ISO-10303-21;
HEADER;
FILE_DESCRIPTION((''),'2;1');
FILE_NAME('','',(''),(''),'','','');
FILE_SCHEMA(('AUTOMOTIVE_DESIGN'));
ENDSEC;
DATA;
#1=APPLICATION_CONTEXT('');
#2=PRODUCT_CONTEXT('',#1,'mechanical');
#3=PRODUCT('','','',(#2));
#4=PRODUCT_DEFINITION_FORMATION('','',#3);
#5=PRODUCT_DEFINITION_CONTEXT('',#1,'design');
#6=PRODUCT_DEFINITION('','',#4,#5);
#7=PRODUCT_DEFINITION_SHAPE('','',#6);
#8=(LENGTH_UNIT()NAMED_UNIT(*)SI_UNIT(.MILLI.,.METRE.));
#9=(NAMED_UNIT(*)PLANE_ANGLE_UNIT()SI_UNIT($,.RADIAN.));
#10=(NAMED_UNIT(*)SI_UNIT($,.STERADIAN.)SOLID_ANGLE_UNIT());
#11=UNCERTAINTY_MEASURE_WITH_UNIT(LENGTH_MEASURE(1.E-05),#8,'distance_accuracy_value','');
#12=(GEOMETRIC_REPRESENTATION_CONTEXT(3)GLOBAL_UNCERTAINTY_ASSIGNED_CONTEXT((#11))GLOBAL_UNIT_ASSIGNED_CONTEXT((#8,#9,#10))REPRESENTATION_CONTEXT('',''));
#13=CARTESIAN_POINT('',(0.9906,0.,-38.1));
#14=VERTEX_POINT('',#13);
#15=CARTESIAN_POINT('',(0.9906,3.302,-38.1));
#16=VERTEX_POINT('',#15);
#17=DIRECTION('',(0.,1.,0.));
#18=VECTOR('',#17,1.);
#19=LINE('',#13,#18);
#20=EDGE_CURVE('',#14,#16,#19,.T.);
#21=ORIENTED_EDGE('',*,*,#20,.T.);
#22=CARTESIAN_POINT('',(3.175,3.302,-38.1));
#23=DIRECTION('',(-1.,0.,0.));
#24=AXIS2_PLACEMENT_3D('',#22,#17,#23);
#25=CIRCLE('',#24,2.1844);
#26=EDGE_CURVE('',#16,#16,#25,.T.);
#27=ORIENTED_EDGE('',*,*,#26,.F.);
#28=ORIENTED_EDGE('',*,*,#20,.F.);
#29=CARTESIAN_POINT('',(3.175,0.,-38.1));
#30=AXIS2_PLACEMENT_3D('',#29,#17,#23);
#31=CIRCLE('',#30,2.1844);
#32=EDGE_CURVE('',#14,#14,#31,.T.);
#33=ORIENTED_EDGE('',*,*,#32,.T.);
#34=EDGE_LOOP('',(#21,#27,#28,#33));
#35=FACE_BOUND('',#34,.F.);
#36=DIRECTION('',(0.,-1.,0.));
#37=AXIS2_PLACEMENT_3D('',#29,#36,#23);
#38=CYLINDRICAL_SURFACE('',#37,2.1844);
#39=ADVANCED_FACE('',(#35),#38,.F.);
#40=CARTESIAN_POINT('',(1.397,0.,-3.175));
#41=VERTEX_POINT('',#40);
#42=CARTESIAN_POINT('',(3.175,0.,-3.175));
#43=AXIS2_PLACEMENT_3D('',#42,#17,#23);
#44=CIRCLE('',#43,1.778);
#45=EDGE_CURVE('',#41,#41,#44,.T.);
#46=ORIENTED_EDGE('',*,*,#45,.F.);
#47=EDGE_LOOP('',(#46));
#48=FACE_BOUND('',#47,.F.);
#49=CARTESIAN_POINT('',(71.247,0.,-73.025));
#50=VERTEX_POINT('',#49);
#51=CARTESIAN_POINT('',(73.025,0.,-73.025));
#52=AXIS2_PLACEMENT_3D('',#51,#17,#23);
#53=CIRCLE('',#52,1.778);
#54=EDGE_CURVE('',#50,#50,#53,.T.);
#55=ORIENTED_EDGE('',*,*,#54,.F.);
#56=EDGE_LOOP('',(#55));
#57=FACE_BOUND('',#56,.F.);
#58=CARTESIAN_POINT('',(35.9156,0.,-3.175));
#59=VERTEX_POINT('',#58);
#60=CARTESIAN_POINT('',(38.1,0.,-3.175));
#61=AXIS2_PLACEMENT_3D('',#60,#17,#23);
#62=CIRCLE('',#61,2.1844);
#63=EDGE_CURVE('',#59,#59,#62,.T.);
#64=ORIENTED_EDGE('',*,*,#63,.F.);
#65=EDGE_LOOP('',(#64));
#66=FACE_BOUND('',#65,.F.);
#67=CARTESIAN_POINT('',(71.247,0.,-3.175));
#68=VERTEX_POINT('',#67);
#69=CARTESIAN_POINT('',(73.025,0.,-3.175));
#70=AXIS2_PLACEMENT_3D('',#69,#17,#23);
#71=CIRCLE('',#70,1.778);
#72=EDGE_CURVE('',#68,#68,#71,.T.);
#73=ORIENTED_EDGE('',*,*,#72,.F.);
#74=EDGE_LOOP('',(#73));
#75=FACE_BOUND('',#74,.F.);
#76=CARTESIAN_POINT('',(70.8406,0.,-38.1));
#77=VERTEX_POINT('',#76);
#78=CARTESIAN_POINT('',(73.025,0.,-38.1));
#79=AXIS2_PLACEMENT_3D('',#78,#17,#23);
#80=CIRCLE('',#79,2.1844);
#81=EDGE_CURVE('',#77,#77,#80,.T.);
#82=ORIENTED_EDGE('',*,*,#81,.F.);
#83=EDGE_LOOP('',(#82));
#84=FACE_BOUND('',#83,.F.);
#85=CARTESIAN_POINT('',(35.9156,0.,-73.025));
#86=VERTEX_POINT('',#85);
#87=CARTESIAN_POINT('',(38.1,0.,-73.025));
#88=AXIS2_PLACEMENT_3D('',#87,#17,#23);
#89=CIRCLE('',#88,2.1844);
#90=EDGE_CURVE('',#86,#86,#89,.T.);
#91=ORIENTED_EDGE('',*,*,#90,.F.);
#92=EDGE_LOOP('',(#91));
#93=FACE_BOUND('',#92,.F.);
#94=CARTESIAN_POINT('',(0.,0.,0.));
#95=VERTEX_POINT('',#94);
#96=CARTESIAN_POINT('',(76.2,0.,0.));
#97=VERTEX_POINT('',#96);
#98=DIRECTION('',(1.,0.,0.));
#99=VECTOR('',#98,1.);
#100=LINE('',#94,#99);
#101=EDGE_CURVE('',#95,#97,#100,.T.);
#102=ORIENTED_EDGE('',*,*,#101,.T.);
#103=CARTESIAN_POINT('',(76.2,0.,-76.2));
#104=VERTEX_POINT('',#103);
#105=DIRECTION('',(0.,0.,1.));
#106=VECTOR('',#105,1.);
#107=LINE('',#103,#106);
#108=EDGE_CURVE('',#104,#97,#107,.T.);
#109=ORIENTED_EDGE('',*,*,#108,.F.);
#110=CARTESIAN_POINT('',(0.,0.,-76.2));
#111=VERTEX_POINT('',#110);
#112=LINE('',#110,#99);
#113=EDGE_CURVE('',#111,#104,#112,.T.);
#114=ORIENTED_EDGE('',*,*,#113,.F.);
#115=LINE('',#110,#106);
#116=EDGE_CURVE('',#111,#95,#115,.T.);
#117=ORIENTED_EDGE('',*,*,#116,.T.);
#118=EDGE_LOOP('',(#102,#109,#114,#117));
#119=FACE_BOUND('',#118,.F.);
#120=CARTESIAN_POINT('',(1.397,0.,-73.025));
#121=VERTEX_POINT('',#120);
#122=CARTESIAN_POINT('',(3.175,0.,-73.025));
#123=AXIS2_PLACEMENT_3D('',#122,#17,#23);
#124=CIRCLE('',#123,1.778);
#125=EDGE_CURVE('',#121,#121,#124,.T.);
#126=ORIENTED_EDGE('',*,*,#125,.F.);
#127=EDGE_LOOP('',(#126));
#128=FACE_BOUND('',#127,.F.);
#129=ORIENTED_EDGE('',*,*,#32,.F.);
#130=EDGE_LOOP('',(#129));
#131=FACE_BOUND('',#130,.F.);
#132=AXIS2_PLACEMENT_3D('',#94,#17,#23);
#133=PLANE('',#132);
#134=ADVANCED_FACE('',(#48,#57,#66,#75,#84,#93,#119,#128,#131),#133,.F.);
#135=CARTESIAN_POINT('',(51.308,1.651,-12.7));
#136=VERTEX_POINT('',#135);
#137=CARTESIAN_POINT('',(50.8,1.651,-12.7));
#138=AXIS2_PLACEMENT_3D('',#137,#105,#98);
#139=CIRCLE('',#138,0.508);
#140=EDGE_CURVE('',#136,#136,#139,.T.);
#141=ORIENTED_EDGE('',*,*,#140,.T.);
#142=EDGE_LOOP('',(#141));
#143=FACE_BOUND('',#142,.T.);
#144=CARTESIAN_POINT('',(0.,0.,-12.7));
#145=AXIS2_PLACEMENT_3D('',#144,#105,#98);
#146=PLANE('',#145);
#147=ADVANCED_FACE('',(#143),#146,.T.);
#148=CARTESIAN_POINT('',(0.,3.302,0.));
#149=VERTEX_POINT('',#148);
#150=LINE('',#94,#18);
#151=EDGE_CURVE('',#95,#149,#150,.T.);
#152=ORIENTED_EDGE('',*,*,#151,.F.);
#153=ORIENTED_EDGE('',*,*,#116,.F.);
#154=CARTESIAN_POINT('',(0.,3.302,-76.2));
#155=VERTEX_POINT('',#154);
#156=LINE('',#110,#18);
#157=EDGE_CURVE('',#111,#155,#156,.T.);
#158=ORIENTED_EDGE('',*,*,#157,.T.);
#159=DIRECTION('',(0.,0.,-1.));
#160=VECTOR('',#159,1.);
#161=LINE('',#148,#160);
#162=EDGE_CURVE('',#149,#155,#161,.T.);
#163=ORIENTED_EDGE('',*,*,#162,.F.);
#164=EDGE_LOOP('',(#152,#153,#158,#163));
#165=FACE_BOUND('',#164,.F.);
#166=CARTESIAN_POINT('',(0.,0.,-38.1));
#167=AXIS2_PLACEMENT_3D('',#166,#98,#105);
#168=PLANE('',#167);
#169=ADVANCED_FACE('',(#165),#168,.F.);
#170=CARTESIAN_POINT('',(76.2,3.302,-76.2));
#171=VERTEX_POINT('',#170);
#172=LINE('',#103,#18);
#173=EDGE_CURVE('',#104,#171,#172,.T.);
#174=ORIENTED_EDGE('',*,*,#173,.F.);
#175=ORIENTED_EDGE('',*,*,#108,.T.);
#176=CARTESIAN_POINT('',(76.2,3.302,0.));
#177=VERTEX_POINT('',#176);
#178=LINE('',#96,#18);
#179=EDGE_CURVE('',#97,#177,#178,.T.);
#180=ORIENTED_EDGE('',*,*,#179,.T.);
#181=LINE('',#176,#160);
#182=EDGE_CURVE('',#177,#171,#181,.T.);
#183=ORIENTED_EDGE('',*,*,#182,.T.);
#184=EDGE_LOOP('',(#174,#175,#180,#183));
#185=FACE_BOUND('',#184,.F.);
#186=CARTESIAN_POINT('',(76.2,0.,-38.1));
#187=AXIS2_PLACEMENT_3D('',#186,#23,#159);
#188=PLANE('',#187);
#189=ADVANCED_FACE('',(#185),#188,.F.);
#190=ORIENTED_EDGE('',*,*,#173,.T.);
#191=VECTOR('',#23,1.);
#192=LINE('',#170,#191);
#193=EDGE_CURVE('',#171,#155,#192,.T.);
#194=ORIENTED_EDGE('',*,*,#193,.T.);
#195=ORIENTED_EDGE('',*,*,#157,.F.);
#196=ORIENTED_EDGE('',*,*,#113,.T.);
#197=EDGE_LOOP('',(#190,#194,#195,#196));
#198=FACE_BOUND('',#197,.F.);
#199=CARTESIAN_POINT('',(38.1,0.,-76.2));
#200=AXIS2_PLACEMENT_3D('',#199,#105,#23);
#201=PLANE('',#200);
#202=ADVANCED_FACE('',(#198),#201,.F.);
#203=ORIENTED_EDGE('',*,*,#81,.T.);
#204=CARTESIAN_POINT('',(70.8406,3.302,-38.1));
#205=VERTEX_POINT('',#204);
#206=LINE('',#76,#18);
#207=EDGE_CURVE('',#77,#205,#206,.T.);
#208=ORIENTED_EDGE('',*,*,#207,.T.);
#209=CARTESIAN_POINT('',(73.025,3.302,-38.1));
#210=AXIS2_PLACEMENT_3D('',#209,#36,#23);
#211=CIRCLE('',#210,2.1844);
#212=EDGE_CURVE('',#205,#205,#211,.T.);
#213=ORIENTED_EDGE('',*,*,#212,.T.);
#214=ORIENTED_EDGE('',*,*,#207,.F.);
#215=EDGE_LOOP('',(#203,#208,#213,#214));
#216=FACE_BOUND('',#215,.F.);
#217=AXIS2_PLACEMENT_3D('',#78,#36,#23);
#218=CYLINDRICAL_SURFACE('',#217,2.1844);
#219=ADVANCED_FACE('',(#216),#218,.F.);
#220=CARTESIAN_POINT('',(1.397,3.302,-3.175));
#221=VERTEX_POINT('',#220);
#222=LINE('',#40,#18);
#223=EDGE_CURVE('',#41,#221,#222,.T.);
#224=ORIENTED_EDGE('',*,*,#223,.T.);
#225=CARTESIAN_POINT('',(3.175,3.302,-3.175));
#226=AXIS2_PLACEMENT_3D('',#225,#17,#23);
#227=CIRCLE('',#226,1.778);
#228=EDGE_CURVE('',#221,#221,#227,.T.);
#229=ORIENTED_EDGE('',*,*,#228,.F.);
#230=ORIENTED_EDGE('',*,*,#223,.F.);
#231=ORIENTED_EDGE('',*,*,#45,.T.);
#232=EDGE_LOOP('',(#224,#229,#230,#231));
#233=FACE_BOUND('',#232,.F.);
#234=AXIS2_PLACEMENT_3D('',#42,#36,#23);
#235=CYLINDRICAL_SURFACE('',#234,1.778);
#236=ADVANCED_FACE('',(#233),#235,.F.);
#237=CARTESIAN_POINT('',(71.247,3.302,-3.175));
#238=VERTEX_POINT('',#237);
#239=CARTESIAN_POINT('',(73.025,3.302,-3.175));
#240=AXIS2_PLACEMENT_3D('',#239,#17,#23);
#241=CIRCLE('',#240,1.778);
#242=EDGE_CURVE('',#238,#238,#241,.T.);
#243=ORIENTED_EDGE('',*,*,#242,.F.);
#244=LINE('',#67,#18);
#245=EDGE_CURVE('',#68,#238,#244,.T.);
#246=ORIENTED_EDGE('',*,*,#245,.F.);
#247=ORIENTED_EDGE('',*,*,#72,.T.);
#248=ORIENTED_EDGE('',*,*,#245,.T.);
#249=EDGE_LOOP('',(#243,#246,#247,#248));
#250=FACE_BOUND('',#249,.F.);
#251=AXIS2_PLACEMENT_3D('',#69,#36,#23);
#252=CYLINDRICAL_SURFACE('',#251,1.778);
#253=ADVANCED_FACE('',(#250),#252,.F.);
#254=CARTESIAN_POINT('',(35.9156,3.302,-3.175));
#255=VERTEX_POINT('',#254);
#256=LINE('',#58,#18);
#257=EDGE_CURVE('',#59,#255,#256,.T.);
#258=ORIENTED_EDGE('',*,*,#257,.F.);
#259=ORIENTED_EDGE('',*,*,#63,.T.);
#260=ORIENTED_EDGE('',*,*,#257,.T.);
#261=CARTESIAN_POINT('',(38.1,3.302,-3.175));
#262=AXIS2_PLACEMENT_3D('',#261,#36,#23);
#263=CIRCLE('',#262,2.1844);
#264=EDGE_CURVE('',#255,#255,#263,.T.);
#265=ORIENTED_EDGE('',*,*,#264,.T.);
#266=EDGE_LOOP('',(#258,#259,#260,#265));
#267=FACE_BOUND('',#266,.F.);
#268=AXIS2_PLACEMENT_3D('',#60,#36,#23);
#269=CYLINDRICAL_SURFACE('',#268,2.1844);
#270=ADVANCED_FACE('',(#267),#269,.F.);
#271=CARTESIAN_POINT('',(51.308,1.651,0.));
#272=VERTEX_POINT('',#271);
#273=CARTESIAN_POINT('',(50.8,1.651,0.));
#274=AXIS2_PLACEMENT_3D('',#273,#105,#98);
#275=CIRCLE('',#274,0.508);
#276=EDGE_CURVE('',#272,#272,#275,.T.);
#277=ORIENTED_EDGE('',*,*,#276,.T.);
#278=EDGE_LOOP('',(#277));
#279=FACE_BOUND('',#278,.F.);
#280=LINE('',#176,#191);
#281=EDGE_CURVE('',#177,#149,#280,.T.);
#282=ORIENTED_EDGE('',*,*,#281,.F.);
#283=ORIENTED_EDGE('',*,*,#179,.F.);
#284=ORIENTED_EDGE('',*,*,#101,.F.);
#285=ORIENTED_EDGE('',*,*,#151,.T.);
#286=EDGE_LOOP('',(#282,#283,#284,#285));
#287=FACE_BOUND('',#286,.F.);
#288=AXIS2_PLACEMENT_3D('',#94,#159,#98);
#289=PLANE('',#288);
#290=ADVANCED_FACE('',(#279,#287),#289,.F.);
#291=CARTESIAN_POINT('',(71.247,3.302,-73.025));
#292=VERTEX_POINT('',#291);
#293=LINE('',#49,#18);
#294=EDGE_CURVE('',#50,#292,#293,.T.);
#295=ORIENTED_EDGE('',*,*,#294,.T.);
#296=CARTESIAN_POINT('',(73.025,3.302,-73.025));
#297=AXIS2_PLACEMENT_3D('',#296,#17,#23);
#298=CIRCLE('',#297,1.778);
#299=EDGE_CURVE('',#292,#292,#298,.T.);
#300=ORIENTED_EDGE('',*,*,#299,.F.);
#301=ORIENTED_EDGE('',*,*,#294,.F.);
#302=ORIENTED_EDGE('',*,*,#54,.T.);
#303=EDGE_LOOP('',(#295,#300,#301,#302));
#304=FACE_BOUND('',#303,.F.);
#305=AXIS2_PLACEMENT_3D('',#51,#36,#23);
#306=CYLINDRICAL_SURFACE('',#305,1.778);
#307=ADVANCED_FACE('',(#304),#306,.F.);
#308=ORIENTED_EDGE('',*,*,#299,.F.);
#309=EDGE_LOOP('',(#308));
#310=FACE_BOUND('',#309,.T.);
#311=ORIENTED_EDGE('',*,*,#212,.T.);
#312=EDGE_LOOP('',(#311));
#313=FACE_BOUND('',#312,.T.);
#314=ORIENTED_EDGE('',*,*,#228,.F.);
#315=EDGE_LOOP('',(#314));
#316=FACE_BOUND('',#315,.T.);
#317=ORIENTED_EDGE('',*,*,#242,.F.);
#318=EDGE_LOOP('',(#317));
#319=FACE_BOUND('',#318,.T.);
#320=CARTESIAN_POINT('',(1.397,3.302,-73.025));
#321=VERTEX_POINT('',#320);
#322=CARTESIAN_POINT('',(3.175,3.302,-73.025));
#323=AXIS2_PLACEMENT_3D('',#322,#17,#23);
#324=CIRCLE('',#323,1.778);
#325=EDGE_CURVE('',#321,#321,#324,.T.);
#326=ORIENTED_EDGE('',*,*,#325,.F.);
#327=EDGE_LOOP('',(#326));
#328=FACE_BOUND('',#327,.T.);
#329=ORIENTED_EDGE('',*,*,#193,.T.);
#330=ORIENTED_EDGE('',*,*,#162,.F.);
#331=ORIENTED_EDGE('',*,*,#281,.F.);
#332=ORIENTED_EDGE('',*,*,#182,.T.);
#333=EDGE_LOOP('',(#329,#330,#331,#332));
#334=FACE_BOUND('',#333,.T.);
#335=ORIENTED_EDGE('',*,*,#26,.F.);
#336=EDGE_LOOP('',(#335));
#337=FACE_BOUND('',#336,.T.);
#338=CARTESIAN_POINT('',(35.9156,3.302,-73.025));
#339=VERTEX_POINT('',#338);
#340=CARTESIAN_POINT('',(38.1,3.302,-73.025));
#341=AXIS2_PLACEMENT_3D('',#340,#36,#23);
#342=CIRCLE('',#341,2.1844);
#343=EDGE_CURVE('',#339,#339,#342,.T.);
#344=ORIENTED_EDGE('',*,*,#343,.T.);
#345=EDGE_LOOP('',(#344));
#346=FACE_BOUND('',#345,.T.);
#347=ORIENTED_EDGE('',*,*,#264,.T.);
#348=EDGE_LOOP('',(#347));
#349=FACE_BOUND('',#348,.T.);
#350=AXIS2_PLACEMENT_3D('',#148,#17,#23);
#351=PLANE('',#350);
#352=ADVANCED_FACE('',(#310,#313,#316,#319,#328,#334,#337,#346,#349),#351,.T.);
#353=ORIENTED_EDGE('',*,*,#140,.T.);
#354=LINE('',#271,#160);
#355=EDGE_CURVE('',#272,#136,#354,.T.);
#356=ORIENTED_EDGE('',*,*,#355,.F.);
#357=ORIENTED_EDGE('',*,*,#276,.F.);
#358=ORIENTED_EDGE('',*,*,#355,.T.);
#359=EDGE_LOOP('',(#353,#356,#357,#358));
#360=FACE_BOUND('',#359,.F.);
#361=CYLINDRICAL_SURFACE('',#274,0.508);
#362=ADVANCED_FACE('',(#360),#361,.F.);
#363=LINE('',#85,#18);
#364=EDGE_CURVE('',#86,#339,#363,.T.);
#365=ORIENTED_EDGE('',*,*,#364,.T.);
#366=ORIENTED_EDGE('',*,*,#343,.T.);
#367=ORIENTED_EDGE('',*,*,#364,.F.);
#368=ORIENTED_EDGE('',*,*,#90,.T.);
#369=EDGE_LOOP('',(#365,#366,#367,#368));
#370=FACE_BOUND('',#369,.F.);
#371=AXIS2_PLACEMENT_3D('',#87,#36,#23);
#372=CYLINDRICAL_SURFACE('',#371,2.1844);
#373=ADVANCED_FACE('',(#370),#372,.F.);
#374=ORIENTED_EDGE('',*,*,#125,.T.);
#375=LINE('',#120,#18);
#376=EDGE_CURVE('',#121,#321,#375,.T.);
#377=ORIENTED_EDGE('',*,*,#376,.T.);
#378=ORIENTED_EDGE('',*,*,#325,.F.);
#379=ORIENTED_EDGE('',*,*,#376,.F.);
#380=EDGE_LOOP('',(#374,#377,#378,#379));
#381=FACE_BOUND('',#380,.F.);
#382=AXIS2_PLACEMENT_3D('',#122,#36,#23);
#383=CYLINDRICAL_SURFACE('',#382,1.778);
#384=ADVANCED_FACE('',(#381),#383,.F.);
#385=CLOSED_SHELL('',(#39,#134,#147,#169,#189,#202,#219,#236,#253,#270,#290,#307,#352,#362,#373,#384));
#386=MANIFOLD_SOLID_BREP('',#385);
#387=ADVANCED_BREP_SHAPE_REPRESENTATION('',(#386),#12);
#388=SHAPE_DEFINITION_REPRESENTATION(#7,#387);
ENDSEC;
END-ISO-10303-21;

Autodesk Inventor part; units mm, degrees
ref_plane "YZ Plane" through (0, 0, 0) normal (1, 0, 0) x (0, 1, 0)
ref_plane "XZ Plane" through (0, 0, 0) normal (0, 1, 0) x (-1, 0, 0)
ref_plane "XY Plane" through (0, 0, 0) normal (0, 0, 1) x (1, 0, 0)
sketch "Sketch1" plane through (0, 0, 0) normal (0, 1, 0) x (-1, 0, 0)
  line L0 (0, 0) -> (-76.2, 0)
  line L1 (-76.2, 0) -> (-76.2, -76.2)
  line L2 (-76.2, -76.2) -> (0, -76.2)
  line L3 (0, -76.2) -> (0, 0)
  line L4 (-38.1, -76.2) -> (-38.1, -73.025)
  circle A0 centre (-38.1, -73.025) radius 2.1844
  line L5 (0, -38.1) -> (-3.175, -38.1)
  line L6 (-38.1, 0) -> (-38.1, -3.175)
  line L7 (-76.2, -38.1) -> (-73.025, -38.1)
  circle A1 centre (-3.175, -38.1) radius 2.1844
  circle A2 centre (-73.025, -38.1) radius 2.1844
  circle A3 centre (-38.1, -3.175) radius 2.1844
  circle A4 centre (-3.175, -73.025) radius 1.778
  circle A5 centre (-3.175, -3.175) radius 1.778
  circle A6 centre (-73.025, -3.175) radius 1.778
  circle A7 centre (-73.025, -73.025) radius 1.778
  dimension "d0" = 76.2
  dimension "d1" = 76.2
  dimension "d2" = 3.175
  dimension "d3" = 4.3688
  dimension "d4" = 3.175
  dimension "d5" = 3.175
  dimension "d6" = 3.175
  dimension "d7" = 4.3688
  dimension "d8" = 4.3688
  dimension "d9" = 4.3688
  dimension "d10" = 3.556
  dimension "d11" = 3.556
  dimension "d12" = 3.556
  dimension "d13" = 3.556
extrude "Extrusion1" add sketch "Sketch1" along normal blind 3.302
sketch "Sketch2" plane through (0, 0, 0) normal (0, 0, 1) x (1, 0, 0)
  line L0 (76.2, 0) -> (76.2, 3.302) projected
  circle A0 centre (50.8, 1.651) radius 0.508
  point P0 (0, 0)
  dimension "d17" = 1.016
extrude "Extrusion2" cut sketch "Sketch2" against normal blind 12.7
properties part number "cold_plate"
